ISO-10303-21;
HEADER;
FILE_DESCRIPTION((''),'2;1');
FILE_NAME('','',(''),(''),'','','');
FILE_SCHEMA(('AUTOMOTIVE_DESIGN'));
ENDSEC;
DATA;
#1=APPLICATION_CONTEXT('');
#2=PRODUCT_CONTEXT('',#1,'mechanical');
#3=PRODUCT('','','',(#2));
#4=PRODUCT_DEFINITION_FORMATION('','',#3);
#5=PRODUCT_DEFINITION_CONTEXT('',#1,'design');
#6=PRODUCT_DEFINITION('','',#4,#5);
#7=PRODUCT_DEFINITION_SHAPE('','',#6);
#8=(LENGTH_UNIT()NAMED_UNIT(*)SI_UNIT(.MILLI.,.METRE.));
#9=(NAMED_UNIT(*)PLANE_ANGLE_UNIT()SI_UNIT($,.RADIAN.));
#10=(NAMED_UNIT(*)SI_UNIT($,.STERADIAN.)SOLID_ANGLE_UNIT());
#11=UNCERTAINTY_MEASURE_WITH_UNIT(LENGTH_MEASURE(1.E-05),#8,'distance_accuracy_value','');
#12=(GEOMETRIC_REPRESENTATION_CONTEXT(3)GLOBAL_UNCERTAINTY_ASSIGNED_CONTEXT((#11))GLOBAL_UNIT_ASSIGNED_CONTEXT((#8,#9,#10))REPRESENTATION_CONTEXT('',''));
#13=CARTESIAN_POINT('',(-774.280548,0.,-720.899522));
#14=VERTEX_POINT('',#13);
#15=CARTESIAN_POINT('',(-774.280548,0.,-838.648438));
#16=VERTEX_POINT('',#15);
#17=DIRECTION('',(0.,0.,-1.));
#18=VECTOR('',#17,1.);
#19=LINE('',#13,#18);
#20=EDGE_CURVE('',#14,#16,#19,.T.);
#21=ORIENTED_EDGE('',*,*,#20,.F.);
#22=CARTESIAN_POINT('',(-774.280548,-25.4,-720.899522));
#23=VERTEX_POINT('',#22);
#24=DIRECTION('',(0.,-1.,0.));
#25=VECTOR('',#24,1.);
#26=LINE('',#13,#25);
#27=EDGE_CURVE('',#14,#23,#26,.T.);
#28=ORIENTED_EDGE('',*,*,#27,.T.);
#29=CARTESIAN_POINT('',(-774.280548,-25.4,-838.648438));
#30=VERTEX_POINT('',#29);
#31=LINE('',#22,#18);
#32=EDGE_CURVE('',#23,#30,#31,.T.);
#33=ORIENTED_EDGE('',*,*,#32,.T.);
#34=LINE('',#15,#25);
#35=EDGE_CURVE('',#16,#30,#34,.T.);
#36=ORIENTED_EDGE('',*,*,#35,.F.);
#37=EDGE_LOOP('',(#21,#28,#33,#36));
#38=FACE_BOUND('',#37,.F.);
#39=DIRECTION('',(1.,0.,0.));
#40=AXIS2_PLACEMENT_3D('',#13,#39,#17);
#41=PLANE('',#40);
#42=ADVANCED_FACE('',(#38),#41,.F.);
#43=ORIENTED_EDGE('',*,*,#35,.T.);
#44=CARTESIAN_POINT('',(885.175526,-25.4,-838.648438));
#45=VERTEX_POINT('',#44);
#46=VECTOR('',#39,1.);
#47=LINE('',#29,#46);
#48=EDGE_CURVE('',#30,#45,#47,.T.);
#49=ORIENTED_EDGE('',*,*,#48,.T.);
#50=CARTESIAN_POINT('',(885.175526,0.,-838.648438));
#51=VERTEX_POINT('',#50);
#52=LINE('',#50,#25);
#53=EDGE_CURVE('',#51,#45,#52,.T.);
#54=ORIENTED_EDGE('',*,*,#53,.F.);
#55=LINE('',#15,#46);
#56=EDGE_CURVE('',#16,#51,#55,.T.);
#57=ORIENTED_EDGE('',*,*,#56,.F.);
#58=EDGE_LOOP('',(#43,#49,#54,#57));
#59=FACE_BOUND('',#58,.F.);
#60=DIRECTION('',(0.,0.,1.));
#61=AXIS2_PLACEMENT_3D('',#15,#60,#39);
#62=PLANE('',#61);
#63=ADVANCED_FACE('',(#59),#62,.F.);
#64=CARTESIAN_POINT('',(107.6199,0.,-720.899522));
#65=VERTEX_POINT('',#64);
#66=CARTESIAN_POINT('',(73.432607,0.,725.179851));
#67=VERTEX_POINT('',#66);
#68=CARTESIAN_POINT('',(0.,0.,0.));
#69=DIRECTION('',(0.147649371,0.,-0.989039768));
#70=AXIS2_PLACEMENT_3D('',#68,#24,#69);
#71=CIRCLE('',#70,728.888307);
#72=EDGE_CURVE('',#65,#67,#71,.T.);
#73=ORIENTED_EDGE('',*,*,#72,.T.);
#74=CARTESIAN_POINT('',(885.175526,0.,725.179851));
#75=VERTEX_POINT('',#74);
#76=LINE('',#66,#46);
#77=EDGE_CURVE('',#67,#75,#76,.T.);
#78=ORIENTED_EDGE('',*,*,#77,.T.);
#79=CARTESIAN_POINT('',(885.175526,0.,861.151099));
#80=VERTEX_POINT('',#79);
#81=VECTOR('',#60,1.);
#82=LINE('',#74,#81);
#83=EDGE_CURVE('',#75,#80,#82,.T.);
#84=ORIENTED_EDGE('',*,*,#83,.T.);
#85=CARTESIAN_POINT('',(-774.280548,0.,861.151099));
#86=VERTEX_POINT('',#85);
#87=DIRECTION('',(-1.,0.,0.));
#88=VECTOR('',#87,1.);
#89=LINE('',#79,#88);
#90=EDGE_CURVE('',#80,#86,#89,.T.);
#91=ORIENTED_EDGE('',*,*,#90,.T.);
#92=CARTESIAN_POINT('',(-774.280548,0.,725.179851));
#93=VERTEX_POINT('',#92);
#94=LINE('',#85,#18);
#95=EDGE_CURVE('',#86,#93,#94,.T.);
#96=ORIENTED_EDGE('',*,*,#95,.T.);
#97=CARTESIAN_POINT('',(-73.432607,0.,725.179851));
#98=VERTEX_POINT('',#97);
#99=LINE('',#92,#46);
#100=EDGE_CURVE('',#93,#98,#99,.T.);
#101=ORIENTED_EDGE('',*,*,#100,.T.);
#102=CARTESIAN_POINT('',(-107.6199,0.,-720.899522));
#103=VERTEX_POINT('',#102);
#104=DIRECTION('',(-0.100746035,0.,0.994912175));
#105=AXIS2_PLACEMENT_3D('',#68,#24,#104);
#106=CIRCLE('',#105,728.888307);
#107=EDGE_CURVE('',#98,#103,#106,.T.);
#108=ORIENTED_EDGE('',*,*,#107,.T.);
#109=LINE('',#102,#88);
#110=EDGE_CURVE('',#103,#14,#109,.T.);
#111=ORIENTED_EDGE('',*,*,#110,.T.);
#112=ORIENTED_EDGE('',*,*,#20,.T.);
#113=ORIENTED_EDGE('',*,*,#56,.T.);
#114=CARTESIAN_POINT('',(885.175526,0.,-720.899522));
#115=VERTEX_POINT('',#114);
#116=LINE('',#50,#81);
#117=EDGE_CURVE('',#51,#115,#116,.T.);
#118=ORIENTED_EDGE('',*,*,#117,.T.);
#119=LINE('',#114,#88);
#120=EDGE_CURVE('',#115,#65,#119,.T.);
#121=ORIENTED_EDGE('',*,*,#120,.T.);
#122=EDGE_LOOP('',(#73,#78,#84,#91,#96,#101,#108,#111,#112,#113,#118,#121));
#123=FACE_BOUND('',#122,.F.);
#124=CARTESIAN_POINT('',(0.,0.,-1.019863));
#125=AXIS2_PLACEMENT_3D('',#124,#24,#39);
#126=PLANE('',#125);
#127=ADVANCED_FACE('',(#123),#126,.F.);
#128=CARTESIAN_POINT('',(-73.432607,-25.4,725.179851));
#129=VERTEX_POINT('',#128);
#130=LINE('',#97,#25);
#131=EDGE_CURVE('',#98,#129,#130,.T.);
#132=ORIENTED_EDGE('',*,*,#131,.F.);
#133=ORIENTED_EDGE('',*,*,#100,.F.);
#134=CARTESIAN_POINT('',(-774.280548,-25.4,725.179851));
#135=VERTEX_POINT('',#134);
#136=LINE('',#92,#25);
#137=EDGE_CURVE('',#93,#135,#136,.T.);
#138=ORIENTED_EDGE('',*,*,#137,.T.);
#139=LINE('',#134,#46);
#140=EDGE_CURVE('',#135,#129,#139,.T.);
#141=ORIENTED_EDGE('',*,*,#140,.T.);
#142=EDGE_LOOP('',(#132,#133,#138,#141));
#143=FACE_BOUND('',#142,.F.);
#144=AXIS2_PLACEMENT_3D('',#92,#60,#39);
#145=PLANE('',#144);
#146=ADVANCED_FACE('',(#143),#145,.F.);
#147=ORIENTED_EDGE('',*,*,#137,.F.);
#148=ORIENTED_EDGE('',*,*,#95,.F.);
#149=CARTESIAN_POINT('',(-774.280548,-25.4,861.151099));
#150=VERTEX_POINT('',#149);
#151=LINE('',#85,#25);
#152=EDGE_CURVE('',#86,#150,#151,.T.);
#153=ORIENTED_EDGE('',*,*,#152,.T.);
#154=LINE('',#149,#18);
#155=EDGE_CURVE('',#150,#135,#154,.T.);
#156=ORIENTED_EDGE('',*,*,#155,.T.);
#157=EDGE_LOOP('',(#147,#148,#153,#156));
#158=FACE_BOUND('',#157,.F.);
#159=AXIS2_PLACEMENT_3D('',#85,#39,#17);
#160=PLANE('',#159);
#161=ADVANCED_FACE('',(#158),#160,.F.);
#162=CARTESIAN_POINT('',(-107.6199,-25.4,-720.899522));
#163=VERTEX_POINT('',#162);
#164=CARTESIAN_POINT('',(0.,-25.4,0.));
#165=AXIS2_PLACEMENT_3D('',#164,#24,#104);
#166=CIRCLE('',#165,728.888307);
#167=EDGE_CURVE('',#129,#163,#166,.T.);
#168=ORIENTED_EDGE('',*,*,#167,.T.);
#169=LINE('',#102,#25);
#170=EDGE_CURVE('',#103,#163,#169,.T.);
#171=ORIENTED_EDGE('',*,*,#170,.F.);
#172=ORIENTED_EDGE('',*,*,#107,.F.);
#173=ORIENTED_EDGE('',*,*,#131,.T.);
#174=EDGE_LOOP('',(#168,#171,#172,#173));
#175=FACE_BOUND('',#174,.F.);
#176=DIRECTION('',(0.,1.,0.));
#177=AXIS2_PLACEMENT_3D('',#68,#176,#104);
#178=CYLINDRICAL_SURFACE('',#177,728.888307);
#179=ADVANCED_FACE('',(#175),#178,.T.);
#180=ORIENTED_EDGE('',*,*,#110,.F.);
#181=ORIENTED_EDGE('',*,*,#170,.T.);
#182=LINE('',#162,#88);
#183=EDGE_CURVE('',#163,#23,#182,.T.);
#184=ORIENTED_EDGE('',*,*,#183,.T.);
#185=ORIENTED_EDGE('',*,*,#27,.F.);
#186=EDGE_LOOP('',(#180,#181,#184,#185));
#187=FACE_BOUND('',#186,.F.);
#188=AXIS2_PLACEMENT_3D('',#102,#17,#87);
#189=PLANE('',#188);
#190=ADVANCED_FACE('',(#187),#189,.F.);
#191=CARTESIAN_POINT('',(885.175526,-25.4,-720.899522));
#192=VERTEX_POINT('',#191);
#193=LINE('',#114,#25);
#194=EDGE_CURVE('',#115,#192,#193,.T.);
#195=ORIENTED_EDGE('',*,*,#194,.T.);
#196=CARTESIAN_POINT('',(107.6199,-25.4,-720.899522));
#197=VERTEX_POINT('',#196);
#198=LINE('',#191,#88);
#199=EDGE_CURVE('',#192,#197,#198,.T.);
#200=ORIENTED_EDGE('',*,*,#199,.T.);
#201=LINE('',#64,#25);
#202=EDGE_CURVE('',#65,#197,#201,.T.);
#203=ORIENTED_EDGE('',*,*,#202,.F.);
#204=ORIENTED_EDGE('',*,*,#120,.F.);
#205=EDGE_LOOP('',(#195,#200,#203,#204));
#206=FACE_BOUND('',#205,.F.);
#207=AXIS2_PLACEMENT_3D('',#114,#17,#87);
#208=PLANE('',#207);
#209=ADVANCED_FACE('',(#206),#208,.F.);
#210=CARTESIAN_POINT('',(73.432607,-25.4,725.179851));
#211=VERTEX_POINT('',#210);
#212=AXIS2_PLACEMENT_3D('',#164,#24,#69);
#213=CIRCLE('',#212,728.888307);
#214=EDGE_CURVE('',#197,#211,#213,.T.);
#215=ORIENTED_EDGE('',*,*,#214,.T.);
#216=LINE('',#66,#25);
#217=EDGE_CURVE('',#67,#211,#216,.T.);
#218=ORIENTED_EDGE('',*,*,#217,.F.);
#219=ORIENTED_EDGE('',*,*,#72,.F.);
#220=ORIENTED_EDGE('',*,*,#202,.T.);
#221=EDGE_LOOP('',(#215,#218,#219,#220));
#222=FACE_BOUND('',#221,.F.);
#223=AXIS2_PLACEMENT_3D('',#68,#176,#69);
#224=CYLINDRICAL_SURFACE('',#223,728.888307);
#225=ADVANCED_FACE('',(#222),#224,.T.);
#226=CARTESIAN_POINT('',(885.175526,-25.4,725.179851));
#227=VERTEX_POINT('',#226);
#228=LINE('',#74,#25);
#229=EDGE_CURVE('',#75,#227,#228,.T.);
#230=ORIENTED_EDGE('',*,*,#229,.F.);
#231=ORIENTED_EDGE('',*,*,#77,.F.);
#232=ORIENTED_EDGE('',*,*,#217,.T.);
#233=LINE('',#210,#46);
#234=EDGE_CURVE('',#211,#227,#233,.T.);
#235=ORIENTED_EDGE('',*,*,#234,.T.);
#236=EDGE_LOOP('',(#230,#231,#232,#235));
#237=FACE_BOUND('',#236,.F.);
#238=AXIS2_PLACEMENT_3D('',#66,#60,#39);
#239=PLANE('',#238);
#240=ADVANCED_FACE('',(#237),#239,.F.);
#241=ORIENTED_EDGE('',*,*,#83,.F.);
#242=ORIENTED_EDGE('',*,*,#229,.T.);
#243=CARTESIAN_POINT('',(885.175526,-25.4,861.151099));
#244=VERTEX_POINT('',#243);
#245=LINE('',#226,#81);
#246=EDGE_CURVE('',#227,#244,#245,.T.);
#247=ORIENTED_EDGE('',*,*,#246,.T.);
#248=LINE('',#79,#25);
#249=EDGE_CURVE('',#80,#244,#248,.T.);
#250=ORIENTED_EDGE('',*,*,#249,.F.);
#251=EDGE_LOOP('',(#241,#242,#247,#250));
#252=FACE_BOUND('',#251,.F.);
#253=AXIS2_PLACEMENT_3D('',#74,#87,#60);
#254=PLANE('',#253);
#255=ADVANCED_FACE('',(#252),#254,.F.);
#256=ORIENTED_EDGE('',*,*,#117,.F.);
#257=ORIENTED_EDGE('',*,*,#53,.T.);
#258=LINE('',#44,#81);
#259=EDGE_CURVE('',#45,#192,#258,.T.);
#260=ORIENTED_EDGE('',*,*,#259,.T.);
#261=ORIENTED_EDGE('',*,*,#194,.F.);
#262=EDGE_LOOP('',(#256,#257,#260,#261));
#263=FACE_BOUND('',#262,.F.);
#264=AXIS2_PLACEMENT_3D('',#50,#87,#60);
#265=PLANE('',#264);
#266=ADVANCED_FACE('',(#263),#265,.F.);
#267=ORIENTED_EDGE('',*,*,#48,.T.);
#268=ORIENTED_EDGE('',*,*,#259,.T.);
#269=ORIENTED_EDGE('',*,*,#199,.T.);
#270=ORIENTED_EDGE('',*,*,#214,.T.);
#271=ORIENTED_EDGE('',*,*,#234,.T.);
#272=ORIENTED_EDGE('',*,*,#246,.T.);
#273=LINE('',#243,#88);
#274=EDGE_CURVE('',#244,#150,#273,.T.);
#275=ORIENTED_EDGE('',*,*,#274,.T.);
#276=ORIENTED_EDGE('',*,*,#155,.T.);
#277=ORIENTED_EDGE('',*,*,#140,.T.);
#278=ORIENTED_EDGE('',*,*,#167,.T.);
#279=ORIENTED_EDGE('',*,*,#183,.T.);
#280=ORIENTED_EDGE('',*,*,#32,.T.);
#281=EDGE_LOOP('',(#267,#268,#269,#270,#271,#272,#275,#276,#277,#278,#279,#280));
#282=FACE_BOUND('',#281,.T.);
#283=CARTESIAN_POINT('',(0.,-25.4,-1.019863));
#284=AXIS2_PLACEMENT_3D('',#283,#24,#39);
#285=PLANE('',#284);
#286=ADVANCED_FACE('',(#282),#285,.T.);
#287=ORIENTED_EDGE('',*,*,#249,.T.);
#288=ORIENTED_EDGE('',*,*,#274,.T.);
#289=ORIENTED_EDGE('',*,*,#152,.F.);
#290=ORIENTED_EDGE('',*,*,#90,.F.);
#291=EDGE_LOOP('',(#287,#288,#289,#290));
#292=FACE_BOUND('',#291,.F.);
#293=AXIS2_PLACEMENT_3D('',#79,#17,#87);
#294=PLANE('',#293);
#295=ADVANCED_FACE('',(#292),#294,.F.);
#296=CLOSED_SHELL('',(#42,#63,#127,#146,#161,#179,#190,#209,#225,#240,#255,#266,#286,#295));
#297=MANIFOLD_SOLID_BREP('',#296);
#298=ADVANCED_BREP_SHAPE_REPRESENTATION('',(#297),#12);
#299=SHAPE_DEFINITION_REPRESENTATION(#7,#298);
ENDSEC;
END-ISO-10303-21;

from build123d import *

# Parameters (mm, degrees)
F1_DEPTH = 25.4
F3_DEPTH = 25.4


# Not quite as in the source:
# - the program builds the solid bodies; features that only make, move or delete a surface that nothing else refers to are left out


with BuildPart() as f1:
    # F0 (on Front) → F1 (new body)
    with BuildSketch(Plane.XZ):
        with BuildLine():
            ThreePointArc((-73.432606987, 725.1798510551), (0, 728.8883070439), (73.432606987, 725.1798510551))
            Line((73.432606987, 725.1798510551), (885.1755261421, 725.1798510551))
            Line((885.1755261421, 725.1798510551), (885.1755261421, 861.151099205))
            Line((885.1755261421, 861.151099205), (-774.2805480957, 861.151099205))
            Line((-774.2805480957, 861.151099205), (-774.2805480957, 725.1798510551))
            Line((-774.2805480957, 725.1798510551), (-73.432606987, 725.1798510551))
        make_face()
    extrude(amount=F1_DEPTH)

    # F0 (on Front) → F3 (join)
    with BuildSketch(Plane.XZ):
        with BuildLine():
            ThreePointArc((107.6199000481, -720.8995223045), (552.1417620936, -475.8336250177), (728.8883070439, 0))
            ThreePointArc((728.8883070439, 0), (540.7413118737, 488.7504452974), (73.432606987, 725.1798510551))
            Line((73.432606987, 725.1798510551), (-73.432606987, 725.1798510551))
            ThreePointArc((-73.432606987, 725.1798510551), (-728.6846993659, 17.2271023467), (-107.6199000481, -720.8995223045))
            Line((-107.6199000481, -720.8995223045), (107.6199000481, -720.8995223045))
        make_face()
        with BuildLine():
            Line((-73.432606987, 725.1798510551), (73.432606987, 725.1798510551))
            ThreePointArc((73.432606987, 725.1798510551), (0, 728.8883070439), (-73.432606987, 725.1798510551))
        make_face()
        with BuildLine():
            ThreePointArc((-73.432606987, 725.1798510551), (0, 728.8883070439), (73.432606987, 725.1798510551))
            Line((73.432606987, 725.1798510551), (885.1755261421, 725.1798510551))
            Line((885.1755261421, 725.1798510551), (885.1755261421, 861.151099205))
            Line((885.1755261421, 861.151099205), (-774.2805480957, 861.151099205))
            Line((-774.2805480957, 861.151099205), (-774.2805480957, 725.1798510551))
            Line((-774.2805480957, 725.1798510551), (-73.432606987, 725.1798510551))
        make_face()
        with BuildLine():
            Line((885.1755261421, -720.8995223045), (107.6199000481, -720.8995223045))
            ThreePointArc((107.6199000481, -720.8995223045), (0, -728.8883070439), (-107.6199000481, -720.8995223045))
            Line((-107.6199000481, -720.8995223045), (-774.2805480957, -720.8995223045))
            Line((-774.2805480957, -720.8995223045), (-774.2805480957, -838.6484384537))
            Line((-774.2805480957, -838.6484384537), (885.1755261421, -838.6484384537))
            Line((885.1755261421, -838.6484384537), (885.1755261421, -720.8995223045))
        make_face()
        with BuildLine():
            ThreePointArc((-107.6199000481, -720.8995223045), (0, -728.8883070439), (107.6199000481, -720.8995223045))
            Line((107.6199000481, -720.8995223045), (-107.6199000481, -720.8995223045))
        make_face()
    extrude(amount=F3_DEPTH)


solid = f1.part
